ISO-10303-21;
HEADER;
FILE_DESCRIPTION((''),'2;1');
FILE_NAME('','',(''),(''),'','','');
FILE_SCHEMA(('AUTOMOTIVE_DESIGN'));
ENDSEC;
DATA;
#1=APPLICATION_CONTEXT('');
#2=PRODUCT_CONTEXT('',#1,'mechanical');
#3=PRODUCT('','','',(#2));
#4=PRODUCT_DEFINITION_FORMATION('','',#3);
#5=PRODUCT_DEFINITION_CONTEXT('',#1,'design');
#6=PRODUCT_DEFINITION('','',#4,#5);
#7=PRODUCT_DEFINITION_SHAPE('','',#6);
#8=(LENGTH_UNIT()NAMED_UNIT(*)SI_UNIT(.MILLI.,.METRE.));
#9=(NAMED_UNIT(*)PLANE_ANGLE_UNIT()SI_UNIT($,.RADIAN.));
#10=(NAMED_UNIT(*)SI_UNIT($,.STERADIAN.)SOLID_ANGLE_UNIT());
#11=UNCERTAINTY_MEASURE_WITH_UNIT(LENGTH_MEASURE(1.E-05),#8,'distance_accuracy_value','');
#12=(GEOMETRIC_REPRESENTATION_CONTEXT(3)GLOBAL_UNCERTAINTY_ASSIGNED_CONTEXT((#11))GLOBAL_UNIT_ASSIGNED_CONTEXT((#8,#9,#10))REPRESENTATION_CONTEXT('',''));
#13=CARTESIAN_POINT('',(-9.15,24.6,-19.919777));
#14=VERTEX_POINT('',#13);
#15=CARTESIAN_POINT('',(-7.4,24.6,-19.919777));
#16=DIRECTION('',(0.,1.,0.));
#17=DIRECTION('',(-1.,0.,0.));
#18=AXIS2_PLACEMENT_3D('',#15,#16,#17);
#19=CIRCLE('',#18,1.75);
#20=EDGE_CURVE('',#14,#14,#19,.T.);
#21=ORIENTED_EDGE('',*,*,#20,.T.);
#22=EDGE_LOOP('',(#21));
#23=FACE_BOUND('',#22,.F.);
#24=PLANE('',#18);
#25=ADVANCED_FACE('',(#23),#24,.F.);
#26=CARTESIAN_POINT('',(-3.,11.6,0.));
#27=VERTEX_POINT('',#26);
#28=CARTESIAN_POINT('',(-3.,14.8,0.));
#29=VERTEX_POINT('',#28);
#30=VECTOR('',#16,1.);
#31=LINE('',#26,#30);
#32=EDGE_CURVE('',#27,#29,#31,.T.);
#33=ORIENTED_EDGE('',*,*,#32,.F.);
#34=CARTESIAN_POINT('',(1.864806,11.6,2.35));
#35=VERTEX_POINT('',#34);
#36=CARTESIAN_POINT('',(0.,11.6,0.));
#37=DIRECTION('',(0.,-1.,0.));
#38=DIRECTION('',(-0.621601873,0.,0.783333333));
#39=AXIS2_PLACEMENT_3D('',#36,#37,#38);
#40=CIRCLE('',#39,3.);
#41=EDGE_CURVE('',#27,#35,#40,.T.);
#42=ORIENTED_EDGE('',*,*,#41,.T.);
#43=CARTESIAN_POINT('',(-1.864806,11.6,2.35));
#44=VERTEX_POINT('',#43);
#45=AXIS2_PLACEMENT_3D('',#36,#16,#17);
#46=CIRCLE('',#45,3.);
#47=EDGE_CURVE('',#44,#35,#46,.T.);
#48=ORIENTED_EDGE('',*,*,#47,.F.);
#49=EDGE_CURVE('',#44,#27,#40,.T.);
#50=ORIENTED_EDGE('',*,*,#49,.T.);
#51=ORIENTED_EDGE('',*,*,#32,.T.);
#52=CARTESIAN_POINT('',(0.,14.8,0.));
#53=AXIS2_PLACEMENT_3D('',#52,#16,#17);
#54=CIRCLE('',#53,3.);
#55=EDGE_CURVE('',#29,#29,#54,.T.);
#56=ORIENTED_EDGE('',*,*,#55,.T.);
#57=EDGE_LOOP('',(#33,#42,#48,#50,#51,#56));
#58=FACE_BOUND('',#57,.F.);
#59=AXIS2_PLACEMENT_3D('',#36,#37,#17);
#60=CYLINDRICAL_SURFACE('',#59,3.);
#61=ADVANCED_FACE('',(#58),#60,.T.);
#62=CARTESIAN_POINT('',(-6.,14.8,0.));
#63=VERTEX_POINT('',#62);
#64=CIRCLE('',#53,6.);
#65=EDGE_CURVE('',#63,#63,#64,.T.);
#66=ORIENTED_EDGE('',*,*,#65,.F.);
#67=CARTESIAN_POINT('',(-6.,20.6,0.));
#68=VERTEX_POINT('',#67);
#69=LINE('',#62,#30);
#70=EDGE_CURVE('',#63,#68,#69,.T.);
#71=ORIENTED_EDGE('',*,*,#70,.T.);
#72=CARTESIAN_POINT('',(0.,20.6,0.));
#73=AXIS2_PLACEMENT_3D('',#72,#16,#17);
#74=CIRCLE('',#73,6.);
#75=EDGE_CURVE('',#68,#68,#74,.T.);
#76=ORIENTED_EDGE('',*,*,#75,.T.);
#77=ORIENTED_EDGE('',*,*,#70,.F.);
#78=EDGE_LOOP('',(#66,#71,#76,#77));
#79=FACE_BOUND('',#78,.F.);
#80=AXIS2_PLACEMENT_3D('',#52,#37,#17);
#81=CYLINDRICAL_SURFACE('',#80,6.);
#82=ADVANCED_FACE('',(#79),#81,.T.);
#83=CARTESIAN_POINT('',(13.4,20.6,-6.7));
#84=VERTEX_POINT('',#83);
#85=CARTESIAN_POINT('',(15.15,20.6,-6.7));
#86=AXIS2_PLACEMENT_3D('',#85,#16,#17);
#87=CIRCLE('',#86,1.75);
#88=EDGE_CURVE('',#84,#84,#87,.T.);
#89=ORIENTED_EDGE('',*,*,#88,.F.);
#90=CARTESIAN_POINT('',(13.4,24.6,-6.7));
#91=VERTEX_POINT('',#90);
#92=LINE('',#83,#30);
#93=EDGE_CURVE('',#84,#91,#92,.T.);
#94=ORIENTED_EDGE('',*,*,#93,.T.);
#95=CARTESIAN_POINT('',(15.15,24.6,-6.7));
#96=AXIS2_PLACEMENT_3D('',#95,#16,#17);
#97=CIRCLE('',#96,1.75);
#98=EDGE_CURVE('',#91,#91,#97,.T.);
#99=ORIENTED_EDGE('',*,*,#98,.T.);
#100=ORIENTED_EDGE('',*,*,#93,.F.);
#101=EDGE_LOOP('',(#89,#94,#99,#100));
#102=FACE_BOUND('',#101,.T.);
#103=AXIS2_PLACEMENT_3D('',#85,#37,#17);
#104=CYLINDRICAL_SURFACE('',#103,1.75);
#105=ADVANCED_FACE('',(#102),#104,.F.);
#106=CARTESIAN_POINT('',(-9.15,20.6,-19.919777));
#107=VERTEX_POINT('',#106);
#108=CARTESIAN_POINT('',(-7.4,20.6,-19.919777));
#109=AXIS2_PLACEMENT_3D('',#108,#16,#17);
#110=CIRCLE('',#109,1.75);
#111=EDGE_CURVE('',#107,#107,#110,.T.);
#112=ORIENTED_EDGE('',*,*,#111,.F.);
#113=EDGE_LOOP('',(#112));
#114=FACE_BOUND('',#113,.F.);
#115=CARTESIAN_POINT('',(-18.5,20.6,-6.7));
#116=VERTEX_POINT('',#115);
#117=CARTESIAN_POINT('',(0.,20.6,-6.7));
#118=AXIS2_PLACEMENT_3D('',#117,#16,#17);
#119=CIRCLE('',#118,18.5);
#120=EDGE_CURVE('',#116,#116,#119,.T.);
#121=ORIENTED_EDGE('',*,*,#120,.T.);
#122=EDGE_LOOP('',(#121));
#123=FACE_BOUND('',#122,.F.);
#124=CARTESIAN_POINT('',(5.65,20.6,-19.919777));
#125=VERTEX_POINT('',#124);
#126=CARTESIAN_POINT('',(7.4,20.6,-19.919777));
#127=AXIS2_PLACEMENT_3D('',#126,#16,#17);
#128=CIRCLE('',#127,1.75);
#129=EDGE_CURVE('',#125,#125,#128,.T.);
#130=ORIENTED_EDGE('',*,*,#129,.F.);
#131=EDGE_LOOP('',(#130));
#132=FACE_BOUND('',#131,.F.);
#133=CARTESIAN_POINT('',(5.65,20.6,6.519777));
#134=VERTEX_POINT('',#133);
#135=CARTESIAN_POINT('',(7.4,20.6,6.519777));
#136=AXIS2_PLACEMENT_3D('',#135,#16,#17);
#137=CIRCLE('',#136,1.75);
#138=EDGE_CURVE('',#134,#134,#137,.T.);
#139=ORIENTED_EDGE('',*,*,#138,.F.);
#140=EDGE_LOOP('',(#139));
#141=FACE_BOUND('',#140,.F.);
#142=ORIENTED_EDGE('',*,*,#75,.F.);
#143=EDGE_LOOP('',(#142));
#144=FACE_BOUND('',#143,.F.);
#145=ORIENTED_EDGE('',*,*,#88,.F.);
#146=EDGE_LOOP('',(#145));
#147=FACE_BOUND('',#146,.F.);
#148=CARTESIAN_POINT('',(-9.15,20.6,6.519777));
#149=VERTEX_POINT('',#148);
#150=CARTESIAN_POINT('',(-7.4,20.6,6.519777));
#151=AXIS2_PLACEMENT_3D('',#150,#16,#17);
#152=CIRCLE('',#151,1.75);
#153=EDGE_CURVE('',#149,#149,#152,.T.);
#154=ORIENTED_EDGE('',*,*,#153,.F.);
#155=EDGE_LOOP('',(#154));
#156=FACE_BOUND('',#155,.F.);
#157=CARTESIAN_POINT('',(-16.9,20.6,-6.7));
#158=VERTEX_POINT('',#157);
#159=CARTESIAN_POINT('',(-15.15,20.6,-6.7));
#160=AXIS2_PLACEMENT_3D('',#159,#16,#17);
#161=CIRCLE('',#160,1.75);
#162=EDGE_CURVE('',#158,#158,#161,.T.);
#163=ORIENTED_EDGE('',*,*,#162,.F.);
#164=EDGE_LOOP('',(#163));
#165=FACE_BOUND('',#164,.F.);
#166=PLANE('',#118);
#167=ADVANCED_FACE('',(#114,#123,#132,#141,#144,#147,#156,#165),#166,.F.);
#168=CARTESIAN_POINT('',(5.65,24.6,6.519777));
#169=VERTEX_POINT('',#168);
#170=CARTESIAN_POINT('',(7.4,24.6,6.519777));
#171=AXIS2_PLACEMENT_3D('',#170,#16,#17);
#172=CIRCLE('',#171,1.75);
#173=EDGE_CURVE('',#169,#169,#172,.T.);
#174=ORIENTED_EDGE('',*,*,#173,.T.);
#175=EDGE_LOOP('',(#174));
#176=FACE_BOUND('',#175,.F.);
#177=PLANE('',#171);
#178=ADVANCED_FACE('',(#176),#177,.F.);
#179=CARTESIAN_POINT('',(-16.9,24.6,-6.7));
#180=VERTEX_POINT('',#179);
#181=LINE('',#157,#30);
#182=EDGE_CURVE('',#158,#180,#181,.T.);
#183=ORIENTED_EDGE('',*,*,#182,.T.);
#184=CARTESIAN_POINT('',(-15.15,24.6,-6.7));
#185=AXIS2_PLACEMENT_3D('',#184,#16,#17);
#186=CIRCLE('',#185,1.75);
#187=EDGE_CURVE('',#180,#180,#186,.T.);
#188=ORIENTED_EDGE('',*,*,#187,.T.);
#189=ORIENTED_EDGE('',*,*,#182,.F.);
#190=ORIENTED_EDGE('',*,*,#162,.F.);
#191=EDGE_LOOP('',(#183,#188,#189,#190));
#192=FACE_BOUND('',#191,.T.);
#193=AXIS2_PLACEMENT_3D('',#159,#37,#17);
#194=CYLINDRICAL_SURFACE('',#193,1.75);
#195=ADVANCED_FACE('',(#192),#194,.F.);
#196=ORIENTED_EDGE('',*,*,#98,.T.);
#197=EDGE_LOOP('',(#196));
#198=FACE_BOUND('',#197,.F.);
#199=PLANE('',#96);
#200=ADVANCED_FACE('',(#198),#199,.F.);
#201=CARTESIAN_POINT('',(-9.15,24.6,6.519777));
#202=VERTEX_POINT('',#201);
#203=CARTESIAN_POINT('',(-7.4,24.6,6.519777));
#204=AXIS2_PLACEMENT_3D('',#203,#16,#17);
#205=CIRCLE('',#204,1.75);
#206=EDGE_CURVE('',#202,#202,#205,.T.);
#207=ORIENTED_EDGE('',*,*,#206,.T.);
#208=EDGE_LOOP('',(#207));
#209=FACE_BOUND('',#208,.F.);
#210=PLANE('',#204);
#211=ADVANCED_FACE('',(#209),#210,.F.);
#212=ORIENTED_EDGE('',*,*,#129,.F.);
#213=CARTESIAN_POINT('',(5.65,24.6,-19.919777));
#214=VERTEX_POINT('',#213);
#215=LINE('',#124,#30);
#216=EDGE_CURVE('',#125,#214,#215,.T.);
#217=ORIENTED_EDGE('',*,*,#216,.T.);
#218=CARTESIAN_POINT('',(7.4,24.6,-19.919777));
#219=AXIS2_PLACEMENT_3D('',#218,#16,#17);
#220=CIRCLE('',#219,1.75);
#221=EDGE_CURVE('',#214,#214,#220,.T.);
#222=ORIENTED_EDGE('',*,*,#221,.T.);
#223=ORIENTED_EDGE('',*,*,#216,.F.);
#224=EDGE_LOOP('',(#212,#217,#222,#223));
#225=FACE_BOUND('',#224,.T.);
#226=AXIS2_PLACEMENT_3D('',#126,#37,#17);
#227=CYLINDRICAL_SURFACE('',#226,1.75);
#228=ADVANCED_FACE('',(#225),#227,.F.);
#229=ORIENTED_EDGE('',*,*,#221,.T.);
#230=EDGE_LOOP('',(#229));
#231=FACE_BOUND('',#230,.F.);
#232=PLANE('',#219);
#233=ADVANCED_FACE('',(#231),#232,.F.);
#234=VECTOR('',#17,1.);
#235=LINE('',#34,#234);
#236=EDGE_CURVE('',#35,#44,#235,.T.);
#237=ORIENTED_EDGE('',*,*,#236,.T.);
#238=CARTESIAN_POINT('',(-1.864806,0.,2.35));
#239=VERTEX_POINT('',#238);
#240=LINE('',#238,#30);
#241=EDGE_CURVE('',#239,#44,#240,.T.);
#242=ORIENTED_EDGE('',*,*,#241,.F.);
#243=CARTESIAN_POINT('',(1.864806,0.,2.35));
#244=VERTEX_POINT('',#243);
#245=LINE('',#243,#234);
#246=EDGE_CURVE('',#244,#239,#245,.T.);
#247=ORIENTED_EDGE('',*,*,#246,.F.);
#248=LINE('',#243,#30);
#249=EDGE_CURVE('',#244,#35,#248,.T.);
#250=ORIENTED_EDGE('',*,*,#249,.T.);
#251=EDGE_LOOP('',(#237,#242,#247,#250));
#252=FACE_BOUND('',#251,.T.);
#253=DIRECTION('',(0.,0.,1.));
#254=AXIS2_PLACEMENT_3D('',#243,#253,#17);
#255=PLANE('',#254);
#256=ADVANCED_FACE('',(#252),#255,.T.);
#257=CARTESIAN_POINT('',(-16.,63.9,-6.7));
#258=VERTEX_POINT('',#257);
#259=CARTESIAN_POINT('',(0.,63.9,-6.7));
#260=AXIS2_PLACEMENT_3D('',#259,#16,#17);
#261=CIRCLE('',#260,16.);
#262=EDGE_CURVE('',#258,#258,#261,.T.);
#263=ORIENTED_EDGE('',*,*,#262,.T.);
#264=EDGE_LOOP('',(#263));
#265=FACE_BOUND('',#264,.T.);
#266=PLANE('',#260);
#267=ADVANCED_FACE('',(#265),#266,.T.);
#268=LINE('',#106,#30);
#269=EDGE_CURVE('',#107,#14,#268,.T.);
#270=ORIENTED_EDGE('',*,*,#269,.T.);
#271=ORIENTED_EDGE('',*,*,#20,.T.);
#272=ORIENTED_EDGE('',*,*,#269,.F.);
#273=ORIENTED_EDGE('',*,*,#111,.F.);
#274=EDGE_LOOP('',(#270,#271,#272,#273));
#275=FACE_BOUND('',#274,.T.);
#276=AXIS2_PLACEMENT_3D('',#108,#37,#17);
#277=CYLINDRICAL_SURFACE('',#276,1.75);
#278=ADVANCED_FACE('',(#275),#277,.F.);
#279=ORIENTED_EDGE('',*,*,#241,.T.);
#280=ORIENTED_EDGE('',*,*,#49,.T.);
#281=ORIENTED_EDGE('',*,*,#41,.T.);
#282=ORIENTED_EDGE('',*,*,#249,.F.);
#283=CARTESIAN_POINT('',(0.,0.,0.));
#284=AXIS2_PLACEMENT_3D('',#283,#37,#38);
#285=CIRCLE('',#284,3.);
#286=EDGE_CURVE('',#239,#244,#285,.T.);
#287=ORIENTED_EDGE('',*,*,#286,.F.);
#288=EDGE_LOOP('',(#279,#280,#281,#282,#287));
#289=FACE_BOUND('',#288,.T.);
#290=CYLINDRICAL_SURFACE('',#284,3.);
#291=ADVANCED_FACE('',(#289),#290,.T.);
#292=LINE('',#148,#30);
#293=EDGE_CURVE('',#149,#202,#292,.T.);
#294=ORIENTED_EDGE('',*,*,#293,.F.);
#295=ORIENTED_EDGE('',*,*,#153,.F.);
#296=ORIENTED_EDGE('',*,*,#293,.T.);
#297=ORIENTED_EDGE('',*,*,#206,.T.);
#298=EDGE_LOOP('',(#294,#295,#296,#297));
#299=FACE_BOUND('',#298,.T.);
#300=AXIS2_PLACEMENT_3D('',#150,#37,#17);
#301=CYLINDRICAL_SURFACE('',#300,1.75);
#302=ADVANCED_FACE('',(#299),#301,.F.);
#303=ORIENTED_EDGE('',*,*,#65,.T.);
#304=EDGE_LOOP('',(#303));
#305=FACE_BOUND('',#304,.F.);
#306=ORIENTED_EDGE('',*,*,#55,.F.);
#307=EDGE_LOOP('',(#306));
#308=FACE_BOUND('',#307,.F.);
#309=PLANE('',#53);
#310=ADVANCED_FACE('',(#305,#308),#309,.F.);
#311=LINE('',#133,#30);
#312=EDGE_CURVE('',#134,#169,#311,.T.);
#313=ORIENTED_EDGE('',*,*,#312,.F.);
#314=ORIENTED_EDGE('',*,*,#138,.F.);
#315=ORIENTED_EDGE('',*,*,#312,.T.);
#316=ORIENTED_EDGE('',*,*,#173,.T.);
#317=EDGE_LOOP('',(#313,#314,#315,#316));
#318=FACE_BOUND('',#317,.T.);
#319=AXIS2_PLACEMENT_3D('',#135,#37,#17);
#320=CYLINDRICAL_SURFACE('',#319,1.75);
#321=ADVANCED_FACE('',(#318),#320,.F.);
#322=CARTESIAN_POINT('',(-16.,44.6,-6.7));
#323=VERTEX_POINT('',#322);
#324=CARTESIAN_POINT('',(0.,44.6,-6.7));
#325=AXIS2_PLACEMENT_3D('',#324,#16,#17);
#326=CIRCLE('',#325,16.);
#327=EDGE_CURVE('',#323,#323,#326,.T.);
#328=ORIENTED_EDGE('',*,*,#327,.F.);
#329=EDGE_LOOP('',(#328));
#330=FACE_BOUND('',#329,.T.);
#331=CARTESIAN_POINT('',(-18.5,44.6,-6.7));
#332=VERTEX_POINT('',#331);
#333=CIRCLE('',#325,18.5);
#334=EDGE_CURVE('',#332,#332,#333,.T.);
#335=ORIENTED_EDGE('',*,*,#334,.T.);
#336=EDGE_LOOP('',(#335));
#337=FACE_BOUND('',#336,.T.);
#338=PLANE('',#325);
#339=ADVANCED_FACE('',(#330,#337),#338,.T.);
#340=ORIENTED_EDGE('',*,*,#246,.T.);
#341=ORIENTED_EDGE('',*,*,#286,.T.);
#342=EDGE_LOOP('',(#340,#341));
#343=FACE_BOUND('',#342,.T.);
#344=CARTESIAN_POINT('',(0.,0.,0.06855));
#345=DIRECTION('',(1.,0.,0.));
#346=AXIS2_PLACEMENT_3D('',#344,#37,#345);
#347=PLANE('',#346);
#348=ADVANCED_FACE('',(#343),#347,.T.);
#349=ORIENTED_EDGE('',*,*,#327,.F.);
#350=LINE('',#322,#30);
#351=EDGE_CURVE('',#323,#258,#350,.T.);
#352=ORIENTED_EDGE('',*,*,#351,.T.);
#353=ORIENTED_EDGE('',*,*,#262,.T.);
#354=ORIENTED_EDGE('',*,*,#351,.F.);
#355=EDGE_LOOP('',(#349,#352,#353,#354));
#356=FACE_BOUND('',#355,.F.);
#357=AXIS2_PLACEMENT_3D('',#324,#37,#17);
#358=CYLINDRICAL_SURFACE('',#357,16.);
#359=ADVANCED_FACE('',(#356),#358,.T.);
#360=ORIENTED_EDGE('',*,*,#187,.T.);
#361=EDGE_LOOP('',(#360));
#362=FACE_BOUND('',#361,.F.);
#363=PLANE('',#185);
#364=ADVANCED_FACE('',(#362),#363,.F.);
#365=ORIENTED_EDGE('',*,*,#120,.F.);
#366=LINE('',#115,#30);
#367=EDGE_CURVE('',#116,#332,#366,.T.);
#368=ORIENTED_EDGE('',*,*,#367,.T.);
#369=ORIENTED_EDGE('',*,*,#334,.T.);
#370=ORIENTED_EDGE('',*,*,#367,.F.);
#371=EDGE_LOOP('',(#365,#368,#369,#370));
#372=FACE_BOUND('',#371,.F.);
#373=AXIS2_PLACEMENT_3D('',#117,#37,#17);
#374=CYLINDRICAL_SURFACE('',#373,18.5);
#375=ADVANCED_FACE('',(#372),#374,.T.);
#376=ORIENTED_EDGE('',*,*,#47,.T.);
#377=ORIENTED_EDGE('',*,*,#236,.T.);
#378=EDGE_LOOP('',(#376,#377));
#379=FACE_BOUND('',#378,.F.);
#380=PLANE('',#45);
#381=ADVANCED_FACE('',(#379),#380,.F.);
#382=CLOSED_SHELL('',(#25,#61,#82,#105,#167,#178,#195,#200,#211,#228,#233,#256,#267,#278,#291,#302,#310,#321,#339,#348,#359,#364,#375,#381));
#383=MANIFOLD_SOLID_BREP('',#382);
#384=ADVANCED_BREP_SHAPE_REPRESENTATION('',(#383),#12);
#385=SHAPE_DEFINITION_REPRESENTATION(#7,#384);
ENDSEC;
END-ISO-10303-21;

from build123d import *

# Parameters (mm, degrees)
F1_DEPTH  = 11.6
F3_R      = 3
F4_DEPTH  = 3.2
F6_R      = 6
F7_DEPTH  = 5.8
F9_R      = 18.5
F10_DEPTH = 24
F12_R     = 16
F13_DEPTH = 19.3
F14_R     = 1.75
F15_DEPTH = 4


# Not quite as in the source:
# - after a boolean that leaves OpenCascade's solid faulty, fix() repairs it


with BuildPart() as f1:
    # F0 (on Front) → F1 (new body)
    with BuildSketch(Plane.XZ):
        with BuildLine():
            Line((1.8648056199, 2.35), (-1.8648056199, 2.35))
            ThreePointArc((-1.8648056199, 2.35), (0, -3), (1.8648056199, 2.35))
        make_face()
    extrude(amount=-F1_DEPTH)

    # F3 (on offset) → F4 (join)
    with BuildSketch(Plane(origin=(0, 11.6, 0), x_dir=(-1, 0, 0), z_dir=(0, 1, 0))):
        Circle(F3_R)
    extrude(amount=F4_DEPTH)

    # F6 (on offset) → F7 (join)
    with BuildSketch(Plane(origin=(0, 14.8, 0), x_dir=(-1, 0, 0), z_dir=(0, 1, 0))):
        Circle(F6_R)
    extrude(amount=F7_DEPTH)

    add(f1.part.fix(), mode=Mode.REPLACE)

    # F9 (on offset) → F10 (join)
    with BuildSketch(Plane(origin=(0, 20.6, 0), x_dir=(-1, 0, 0), z_dir=(0, 1, 0))):
        with Locations((0, -6.7)):
            Circle(F9_R)
    extrude(amount=F10_DEPTH)

    # F12 (on offset) → F13 (join)
    with BuildSketch(Plane(origin=(0, 44.6, 0), x_dir=(-1, 0, 0), z_dir=(0, 1, 0))):
        with Locations((0, -6.7)):
            Circle(F12_R)
    extrude(amount=F13_DEPTH)

    # F14 (on offset) → F15 (cut)
    with BuildSketch(Plane(origin=(0, 20.6, 0), x_dir=(-1, 0, 0), z_dir=(0, 1, 0))):
        with Locations((-15.15, -6.7)):
            Circle(F14_R)
        with Locations((15.15, -6.7)):
            Circle(F14_R)
        with Locations((7.4, -19.9197768514)):
            Circle(F14_R)
        with Locations((-7.4, -19.9197768514)):
            Circle(F14_R)
        with Locations((-7.4, 6.5197768514)):
            Circle(F14_R)
        with Locations((7.4, 6.5197768514)):
            Circle(F14_R)
    extrude(amount=F15_DEPTH, mode=Mode.SUBTRACT)


solid = f1.part
